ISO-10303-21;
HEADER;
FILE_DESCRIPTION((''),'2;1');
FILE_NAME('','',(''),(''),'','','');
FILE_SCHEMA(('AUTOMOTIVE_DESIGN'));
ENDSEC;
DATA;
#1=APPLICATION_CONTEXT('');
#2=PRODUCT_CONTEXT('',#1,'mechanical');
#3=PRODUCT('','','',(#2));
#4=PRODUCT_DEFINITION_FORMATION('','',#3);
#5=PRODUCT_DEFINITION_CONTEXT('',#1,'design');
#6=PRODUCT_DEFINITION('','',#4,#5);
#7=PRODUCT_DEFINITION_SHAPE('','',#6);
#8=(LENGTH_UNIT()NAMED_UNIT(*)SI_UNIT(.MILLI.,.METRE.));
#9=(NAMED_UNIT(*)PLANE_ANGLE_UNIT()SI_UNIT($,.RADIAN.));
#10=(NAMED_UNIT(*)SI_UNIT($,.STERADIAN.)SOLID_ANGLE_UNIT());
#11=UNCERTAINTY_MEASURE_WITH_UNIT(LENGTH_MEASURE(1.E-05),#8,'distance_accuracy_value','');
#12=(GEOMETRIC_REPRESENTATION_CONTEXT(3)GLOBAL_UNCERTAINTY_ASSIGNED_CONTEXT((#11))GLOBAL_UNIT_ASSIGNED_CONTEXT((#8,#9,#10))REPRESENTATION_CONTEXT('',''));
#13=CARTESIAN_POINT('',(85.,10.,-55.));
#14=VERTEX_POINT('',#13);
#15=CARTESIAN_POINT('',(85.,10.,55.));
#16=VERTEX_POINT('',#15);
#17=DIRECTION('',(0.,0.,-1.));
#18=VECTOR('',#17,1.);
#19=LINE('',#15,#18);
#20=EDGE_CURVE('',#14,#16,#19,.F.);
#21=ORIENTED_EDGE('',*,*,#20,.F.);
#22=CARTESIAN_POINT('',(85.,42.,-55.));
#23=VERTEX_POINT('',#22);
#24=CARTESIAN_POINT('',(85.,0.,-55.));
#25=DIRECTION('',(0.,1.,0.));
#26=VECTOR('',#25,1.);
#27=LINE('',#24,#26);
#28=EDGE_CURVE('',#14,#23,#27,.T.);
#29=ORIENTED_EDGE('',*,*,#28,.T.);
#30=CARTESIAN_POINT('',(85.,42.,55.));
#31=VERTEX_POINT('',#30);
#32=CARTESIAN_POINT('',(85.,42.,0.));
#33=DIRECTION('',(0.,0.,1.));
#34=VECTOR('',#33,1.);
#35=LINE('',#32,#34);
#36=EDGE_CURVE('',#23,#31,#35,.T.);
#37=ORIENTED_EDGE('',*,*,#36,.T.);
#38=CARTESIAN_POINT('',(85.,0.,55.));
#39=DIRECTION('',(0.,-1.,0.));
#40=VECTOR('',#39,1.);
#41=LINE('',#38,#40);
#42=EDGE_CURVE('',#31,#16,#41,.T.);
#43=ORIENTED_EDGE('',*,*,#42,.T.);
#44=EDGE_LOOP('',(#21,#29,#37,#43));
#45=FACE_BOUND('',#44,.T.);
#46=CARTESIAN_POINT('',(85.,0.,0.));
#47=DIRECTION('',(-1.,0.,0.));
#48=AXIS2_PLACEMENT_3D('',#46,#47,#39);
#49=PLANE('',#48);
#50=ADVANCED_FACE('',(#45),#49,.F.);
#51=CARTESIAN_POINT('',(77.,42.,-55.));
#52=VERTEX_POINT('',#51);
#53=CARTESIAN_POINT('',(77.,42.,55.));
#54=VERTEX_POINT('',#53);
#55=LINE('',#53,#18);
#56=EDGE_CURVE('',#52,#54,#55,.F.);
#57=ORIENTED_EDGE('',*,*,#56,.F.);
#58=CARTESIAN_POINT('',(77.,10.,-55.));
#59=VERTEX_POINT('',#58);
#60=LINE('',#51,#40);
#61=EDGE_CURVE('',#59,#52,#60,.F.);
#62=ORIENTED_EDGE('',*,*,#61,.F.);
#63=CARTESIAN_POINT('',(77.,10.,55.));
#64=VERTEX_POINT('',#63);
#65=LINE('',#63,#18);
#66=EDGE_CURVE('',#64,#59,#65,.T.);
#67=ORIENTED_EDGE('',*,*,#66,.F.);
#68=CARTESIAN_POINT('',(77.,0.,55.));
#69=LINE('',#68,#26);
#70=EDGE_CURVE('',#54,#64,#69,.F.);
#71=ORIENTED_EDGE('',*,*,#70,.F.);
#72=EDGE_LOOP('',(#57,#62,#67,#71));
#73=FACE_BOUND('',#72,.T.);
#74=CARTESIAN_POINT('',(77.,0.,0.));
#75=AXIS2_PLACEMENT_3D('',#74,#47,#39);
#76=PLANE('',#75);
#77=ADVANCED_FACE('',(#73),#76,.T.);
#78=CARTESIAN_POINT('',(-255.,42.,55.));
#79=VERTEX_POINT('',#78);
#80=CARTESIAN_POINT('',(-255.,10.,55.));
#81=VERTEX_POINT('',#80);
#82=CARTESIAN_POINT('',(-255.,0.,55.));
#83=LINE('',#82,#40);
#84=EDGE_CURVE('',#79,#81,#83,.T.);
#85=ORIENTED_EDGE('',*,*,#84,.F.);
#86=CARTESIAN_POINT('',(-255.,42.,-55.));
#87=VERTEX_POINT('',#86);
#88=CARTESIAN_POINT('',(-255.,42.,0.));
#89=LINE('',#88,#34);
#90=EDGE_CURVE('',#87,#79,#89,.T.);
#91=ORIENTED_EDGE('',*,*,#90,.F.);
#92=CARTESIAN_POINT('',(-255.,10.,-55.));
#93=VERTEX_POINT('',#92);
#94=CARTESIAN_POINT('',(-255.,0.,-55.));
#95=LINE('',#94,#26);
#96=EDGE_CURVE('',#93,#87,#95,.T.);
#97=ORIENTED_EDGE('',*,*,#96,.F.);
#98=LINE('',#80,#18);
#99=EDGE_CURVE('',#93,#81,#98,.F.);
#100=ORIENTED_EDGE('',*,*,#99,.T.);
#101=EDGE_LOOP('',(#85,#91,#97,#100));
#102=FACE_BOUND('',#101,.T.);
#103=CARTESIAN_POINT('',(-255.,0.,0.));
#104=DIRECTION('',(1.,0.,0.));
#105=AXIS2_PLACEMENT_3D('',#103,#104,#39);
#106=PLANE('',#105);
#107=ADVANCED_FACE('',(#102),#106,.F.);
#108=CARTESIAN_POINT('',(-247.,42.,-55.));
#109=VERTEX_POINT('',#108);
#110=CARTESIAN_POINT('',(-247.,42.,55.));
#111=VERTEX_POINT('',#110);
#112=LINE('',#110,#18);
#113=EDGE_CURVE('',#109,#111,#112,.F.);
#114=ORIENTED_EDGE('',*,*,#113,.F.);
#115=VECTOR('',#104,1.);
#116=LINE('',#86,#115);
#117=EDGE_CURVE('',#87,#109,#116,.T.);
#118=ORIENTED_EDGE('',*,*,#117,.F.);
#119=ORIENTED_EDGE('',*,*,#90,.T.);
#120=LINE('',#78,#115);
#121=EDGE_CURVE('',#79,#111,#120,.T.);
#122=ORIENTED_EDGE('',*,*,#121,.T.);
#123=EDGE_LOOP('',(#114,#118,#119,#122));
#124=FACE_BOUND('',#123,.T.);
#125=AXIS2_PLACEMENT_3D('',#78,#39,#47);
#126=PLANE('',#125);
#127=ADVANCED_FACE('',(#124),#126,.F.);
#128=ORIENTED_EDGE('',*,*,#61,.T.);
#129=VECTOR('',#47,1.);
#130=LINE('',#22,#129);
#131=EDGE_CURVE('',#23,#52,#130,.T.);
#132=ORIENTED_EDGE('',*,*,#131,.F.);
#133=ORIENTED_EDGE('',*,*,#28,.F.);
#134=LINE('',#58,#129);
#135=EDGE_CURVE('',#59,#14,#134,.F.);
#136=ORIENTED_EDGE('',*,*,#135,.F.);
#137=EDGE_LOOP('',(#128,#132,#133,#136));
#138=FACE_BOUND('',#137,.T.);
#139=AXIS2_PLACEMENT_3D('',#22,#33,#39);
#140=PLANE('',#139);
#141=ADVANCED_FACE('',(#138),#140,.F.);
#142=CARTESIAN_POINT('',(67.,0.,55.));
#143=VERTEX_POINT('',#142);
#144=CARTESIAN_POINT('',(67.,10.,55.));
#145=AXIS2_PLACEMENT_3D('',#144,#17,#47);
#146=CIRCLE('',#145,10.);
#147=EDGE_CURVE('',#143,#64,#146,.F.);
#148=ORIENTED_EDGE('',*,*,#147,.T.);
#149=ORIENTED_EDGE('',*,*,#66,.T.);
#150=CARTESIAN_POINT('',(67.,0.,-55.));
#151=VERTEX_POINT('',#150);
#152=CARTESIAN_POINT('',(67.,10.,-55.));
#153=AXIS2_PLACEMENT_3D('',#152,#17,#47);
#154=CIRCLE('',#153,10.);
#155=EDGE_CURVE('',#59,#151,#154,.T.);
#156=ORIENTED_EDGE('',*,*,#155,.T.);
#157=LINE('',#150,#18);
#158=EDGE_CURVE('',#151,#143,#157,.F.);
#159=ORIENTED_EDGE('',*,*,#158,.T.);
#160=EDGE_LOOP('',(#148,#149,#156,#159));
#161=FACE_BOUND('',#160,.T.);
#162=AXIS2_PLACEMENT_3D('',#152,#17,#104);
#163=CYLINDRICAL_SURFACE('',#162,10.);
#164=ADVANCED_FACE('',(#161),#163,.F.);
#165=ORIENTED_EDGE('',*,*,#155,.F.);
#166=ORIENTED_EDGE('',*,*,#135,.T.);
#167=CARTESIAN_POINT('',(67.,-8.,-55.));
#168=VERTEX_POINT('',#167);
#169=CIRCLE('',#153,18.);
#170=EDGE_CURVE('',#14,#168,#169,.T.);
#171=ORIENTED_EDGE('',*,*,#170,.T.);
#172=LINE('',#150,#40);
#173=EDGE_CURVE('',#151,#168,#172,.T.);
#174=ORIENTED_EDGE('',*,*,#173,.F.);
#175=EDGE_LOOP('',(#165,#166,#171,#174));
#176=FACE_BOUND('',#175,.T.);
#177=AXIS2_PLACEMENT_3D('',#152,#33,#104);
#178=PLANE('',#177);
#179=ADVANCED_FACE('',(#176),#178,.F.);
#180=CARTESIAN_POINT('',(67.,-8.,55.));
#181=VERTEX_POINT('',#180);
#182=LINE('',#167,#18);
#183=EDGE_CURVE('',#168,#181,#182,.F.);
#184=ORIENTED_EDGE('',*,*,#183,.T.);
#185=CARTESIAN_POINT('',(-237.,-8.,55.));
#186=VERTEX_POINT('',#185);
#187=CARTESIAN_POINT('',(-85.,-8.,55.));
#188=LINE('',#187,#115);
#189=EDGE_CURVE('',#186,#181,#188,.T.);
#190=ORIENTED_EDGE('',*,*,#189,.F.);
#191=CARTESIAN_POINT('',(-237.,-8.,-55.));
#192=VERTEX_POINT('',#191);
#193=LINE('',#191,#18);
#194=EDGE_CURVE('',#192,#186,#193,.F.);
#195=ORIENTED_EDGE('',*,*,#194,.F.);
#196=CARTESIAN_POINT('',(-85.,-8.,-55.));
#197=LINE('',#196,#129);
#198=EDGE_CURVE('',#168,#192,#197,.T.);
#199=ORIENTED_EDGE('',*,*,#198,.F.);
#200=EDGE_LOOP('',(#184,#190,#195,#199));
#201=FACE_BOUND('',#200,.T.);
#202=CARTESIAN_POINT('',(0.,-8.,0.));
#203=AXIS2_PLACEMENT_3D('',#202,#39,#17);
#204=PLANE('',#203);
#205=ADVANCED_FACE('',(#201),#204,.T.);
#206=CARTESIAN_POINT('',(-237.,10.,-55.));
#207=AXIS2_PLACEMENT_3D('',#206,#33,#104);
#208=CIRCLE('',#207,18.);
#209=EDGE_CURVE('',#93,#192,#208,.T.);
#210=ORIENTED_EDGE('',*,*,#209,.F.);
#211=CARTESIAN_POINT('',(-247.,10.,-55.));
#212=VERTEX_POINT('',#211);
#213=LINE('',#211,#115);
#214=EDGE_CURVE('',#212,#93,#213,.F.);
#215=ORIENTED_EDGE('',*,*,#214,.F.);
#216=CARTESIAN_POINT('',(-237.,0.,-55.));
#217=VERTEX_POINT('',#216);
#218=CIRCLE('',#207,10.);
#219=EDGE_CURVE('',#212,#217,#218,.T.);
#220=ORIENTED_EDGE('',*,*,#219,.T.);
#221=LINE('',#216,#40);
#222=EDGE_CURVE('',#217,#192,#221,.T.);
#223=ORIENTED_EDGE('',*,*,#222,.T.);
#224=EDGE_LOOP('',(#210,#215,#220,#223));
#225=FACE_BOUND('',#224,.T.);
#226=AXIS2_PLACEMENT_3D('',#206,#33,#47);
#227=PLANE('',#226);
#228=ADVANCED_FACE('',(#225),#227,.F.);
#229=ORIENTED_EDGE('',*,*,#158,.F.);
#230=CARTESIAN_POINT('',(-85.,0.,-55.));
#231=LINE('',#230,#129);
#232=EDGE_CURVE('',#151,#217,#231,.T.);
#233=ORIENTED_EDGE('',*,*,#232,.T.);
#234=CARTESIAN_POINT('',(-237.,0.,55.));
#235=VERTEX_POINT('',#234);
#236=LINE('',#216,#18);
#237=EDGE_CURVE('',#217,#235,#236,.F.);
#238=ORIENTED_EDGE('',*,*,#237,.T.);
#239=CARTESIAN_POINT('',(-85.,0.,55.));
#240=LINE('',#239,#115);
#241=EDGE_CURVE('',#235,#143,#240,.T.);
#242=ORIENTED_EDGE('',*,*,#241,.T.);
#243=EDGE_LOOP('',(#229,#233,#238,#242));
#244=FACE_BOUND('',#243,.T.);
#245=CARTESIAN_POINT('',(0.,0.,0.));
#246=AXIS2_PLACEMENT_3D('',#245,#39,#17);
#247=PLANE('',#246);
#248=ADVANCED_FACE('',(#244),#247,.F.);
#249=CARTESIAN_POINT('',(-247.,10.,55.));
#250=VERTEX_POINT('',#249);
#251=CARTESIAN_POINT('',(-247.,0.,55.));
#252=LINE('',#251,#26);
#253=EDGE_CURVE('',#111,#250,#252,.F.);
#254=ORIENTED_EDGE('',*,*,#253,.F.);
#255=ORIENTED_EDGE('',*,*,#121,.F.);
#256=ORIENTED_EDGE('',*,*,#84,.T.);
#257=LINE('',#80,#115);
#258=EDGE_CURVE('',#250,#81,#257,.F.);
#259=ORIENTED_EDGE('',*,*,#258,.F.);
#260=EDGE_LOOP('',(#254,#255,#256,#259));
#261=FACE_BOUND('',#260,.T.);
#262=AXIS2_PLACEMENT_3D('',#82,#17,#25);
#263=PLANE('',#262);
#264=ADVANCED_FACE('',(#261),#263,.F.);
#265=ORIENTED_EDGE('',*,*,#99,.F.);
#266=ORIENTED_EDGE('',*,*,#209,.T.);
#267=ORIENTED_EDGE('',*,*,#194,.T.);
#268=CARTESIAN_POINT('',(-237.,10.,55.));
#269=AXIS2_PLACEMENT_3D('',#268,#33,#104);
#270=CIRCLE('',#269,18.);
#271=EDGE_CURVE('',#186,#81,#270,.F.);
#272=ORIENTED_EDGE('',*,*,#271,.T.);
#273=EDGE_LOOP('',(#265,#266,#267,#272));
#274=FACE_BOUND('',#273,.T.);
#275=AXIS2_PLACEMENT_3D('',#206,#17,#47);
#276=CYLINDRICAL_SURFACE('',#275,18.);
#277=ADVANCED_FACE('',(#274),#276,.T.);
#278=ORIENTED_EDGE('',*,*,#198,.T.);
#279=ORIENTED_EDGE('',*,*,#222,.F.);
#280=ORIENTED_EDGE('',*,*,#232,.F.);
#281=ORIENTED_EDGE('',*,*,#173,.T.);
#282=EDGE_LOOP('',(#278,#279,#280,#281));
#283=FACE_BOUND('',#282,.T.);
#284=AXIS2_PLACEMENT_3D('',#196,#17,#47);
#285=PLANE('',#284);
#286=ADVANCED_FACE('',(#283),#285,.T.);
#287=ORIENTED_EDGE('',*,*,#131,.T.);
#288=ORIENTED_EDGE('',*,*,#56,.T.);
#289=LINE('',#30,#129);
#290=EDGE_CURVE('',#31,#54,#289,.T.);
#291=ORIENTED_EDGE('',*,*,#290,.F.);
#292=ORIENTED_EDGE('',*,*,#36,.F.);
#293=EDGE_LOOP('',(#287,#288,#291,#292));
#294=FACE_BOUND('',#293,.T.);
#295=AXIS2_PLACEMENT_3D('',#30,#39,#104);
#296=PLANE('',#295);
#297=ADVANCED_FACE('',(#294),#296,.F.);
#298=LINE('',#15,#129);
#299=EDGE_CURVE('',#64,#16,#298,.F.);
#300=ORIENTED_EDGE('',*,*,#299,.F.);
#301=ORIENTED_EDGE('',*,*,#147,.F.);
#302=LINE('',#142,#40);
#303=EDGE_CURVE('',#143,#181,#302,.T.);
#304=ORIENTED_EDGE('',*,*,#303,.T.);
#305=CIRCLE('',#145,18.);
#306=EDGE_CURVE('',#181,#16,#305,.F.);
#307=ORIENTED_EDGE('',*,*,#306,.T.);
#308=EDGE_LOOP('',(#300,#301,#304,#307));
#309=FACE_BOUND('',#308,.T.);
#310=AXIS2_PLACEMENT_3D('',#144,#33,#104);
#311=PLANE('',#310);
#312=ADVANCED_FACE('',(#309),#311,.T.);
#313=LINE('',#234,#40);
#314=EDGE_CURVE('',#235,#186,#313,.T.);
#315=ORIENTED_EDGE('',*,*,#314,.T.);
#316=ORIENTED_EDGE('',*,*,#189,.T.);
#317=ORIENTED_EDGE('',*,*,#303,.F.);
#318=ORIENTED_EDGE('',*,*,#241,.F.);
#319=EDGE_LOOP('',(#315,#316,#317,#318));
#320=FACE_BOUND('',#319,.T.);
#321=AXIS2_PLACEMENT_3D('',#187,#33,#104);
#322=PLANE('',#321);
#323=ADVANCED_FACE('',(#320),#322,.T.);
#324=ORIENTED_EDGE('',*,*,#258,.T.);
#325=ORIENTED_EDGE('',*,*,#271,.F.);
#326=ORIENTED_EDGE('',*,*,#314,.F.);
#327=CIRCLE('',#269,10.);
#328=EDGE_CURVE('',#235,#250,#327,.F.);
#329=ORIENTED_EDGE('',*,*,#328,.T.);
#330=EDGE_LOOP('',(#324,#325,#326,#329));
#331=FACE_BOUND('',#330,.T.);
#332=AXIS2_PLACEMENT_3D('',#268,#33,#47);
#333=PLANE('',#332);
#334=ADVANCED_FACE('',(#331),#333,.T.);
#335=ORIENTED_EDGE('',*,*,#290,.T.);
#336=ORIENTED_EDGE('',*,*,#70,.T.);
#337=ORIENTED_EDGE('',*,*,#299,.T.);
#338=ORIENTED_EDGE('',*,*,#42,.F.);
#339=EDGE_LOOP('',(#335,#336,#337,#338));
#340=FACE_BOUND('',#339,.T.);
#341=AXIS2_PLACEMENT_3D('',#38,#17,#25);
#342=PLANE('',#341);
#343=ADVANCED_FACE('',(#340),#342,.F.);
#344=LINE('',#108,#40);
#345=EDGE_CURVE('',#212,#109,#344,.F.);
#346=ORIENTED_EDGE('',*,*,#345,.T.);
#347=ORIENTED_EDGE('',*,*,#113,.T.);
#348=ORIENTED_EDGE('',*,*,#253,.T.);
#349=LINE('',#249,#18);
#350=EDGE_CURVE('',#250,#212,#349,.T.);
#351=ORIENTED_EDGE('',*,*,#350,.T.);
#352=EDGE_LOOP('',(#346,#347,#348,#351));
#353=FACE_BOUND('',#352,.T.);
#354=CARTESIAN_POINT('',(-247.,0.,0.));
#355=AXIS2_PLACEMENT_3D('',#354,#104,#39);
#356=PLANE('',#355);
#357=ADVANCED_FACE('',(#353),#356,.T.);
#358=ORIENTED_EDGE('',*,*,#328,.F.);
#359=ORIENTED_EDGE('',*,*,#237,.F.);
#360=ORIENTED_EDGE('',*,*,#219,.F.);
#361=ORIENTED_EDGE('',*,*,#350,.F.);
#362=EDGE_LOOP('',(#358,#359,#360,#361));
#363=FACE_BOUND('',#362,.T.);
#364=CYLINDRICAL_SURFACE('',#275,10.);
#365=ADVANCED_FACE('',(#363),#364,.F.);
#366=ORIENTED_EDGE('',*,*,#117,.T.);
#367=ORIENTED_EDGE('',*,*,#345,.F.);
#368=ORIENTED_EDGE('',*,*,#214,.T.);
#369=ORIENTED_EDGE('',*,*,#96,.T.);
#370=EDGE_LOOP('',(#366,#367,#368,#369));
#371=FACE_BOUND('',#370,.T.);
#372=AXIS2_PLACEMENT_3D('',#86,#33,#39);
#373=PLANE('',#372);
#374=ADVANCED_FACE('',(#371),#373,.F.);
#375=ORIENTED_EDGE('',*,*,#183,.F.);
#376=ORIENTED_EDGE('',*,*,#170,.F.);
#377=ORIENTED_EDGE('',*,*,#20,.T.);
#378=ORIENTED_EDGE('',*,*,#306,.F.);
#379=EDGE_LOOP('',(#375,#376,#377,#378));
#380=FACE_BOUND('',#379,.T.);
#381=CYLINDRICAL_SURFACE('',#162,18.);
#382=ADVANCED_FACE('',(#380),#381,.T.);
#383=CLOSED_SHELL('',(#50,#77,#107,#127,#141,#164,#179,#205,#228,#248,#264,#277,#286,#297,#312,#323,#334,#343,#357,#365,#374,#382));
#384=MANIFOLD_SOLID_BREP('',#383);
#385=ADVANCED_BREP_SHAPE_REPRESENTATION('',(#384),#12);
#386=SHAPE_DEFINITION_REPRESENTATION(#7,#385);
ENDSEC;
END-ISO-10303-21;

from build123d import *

# Parameters (mm, degrees)
SKETCH2_W                    = 170
SKETCH2_H                    = 110
BASE_FLANGE1_DEPTH           = 8
EDGE_FLANGE1_STRIP_W         = 52
EDGE_FLANGE1_STRIP_H         = 8
EDGE_FLANGE1_STRIP_CUT_DEPTH = 110
EDGE_FLANGE1_DEPTH           = 110


# Sheet-metal steps are written as plain solids
with BuildPart() as part:
    # Sketch2 → Base-Flange1 (new body)
    with BuildSketch(Plane(origin=(0, 0, 0), x_dir=(1, 0, 0), z_dir=(0, 1, 0))):
        Rectangle(SKETCH2_W, SKETCH2_H)
    extrude(amount=-BASE_FLANGE1_DEPTH)

    # Edge-Flange1 strip (across the edge) → Edge-Flange1 strip cut (cut)
    with BuildSketch(Plane(origin=(85, 0, 55), x_dir=(-1, 0, 0), z_dir=(0, 0, -1))):
        with Locations((-8, -4)):
            Rectangle(EDGE_FLANGE1_STRIP_W, EDGE_FLANGE1_STRIP_H)
    extrude(amount=EDGE_FLANGE1_STRIP_CUT_DEPTH, mode=Mode.SUBTRACT)

    # Edge-Flange1 section (across the edge) → Edge-Flange1 (add)
    with BuildSketch(Plane(origin=(85, 0, 55), x_dir=(-1, 0, 0), z_dir=(0, 0, -1))):
        with BuildLine():
            Line((0, 10), (0, 42))
            Line((0, 42), (8, 42))
            Line((8, 42), (8, 10))
            ThreePointArc((8, 10), (10.928932188, 2.928932188), (18, 0))
            Line((18, 0), (18, -8))
            ThreePointArc((18, -8), (5.272077939, -2.727922061), (0, 10))
        make_face()
    extrude(amount=EDGE_FLANGE1_DEPTH)

    # Mirror1: part across plane


with BuildPart() as part_1:
    add(part.part)
    add(part.part.mirror(Plane(origin=(-85, -8, 55), x_dir=(0, 0, 1), z_dir=(-1, 0, 0))))


solid = part_1.part
